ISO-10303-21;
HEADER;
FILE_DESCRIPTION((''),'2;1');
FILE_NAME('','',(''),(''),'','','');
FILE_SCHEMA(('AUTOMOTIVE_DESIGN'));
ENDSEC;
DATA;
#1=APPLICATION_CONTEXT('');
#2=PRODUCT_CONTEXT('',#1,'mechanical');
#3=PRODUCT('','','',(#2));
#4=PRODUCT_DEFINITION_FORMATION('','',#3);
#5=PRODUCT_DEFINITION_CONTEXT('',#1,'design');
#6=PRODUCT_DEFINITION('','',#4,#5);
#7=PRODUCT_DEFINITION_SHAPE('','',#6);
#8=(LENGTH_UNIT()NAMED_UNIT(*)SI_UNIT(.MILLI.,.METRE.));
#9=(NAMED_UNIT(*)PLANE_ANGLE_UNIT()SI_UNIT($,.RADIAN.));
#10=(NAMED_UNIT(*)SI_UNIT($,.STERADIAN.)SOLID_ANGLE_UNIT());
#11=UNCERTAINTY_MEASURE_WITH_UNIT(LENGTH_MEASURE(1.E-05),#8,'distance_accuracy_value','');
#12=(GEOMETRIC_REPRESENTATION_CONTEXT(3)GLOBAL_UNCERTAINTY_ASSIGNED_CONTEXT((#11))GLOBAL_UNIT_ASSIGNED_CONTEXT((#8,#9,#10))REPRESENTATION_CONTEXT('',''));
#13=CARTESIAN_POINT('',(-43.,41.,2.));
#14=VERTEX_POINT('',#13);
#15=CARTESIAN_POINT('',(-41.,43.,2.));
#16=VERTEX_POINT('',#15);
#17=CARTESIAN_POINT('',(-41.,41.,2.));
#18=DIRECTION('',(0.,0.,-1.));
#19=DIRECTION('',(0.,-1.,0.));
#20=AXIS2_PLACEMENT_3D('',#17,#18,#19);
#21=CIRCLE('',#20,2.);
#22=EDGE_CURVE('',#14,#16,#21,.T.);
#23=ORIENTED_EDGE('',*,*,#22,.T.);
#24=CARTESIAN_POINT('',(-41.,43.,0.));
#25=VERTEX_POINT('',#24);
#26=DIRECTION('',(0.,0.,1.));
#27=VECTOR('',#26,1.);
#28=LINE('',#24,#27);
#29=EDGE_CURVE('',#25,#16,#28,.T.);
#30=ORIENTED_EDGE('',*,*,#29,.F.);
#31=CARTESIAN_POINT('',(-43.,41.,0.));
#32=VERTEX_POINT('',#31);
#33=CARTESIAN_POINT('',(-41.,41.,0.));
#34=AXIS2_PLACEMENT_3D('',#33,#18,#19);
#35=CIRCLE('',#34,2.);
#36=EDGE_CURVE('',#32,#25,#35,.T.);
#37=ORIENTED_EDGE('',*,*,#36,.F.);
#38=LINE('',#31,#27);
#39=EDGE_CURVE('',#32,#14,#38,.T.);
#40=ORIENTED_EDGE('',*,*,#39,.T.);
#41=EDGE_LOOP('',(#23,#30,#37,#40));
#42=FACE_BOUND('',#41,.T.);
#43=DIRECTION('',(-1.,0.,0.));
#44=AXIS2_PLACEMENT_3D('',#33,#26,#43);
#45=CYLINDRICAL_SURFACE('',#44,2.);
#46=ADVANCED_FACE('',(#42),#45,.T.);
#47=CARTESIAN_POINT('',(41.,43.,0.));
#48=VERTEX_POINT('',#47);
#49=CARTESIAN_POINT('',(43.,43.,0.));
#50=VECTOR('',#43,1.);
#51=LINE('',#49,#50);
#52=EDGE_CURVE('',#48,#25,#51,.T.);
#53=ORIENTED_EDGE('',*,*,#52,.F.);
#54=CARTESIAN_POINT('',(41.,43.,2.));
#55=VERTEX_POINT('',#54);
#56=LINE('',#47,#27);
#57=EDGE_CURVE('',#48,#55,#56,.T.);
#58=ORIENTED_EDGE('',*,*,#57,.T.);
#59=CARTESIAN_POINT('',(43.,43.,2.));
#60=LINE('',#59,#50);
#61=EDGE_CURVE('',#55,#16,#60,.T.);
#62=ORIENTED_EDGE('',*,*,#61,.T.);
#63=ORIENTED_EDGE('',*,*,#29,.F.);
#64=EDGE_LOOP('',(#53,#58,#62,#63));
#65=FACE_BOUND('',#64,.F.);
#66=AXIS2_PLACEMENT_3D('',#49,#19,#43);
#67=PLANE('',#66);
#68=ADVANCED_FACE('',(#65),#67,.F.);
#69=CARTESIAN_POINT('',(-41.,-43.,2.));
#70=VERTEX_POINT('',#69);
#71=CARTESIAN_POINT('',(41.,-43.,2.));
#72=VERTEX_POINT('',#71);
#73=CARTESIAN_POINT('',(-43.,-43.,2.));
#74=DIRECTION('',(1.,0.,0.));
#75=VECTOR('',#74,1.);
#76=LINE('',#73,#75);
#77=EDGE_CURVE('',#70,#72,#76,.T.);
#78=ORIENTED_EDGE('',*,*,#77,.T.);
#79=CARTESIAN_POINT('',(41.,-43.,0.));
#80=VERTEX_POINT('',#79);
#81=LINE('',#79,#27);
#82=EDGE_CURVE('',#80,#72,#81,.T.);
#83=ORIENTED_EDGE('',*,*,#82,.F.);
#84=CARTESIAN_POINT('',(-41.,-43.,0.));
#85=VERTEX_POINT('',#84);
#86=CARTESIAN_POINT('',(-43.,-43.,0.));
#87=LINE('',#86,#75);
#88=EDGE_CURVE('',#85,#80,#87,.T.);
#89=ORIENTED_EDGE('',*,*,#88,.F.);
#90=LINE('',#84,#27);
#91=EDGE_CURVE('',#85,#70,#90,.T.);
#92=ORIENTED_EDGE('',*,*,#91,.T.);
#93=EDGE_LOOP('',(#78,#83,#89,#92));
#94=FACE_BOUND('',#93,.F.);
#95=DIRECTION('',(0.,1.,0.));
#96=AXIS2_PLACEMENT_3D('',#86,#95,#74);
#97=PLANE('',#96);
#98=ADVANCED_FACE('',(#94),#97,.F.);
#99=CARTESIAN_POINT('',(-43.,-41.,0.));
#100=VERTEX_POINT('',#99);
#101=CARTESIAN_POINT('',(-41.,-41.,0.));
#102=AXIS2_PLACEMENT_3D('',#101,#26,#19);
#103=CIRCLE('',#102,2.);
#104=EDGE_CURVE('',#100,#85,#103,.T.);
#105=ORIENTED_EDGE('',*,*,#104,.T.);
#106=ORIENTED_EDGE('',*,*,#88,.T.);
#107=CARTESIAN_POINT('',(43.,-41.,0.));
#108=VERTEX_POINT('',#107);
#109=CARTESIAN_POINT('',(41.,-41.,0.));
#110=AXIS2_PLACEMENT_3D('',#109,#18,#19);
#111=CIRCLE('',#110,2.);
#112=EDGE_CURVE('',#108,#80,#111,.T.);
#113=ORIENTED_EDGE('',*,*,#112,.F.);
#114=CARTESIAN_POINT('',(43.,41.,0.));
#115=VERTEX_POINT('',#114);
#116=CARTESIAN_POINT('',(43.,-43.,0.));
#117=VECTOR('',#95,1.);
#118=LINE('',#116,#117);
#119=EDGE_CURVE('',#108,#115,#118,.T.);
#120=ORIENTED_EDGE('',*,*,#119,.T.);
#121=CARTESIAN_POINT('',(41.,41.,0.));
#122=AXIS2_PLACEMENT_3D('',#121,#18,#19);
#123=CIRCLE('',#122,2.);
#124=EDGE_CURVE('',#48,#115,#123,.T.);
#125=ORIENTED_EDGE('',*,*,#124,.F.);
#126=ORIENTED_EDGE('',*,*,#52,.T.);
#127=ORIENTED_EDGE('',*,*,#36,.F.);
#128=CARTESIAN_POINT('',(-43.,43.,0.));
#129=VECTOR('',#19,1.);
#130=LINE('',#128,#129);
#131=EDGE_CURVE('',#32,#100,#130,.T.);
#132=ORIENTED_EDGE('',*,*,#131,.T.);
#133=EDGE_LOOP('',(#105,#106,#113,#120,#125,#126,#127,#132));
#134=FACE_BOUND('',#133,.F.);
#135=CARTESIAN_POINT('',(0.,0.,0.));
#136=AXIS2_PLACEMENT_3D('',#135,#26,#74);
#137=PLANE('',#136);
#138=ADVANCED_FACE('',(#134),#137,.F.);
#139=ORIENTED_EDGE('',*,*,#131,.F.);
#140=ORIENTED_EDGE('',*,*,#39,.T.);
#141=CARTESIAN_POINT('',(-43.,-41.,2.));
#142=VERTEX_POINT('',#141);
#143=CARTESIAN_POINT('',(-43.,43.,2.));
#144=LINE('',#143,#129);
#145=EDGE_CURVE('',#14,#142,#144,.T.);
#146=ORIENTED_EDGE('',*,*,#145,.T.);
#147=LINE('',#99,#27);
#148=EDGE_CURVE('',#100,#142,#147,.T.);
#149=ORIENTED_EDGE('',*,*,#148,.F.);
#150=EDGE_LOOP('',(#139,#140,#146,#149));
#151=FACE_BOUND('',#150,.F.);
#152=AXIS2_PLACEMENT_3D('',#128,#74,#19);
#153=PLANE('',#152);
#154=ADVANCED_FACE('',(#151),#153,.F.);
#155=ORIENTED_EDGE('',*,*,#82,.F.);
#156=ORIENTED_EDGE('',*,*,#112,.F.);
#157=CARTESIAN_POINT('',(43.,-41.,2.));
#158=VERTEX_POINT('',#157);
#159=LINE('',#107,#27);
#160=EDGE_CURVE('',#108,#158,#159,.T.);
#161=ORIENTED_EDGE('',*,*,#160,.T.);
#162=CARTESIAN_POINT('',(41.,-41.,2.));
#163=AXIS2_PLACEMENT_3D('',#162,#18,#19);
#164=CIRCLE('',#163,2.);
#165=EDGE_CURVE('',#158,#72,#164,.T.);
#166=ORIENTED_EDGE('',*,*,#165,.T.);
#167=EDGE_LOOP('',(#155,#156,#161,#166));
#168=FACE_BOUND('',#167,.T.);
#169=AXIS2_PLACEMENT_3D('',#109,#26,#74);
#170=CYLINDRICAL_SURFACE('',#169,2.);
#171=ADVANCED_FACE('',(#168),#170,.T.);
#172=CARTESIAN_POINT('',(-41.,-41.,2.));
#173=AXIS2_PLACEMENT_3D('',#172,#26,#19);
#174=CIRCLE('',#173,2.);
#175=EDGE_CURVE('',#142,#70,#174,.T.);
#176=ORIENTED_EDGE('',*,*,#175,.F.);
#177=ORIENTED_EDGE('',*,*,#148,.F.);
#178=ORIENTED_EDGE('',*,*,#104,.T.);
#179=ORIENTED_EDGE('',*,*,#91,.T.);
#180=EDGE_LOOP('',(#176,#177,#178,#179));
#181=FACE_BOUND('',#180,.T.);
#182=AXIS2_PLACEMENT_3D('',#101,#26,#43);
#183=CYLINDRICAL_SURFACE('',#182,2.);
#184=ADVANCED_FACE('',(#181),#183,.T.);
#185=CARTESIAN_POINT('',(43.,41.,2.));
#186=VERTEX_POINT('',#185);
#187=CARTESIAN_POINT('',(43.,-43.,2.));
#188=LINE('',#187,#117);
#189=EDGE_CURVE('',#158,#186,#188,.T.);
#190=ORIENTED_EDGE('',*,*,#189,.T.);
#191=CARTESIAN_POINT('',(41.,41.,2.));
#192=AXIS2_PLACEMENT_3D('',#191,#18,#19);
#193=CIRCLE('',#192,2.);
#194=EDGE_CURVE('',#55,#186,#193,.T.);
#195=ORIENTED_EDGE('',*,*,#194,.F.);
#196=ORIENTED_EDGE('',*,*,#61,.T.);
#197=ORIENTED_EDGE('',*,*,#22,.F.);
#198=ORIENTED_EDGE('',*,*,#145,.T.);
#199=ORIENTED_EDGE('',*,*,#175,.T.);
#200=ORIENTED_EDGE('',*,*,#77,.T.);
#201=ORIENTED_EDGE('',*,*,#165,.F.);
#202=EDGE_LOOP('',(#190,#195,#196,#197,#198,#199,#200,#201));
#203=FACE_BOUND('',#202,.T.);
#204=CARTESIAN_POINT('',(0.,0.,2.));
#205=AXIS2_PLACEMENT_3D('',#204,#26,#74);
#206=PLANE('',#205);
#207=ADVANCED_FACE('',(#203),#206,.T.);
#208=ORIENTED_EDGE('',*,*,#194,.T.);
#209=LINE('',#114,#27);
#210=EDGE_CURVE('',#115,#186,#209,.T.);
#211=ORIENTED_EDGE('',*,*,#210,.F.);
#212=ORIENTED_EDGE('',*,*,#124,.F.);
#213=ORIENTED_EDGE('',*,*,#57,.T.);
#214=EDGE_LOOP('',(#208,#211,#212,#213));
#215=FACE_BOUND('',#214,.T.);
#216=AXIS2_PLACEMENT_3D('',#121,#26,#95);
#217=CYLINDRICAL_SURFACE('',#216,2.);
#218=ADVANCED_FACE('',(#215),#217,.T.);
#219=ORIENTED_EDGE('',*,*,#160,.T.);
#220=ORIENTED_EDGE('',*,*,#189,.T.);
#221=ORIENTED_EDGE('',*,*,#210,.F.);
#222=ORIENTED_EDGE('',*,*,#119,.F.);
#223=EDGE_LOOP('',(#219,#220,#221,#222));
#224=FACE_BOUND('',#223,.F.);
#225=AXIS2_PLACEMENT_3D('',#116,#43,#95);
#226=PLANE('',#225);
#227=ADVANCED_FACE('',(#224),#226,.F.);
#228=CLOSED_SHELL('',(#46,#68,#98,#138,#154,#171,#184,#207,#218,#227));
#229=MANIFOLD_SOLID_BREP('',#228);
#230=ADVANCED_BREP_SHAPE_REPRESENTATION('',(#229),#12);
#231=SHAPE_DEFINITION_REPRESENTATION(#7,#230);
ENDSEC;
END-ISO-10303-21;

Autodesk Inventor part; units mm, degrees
ref_plane "YZ Plane" through (0, 0, 0) normal (1, 0, 0) x (0, 1, 0)
ref_plane "XZ Plane" through (0, 0, 0) normal (0, 1, 0) x (-1, 0, 0)
ref_plane "XY Plane" through (0, 0, 0) normal (0, 0, 1) x (1, 0, 0)
sketch "Sketch1" plane through (0, 0, 0) normal (0, 0, 1) x (1, 0, 0)
  line L0 (-43, -43) -> (43, -43)
  line L1 (43, -43) -> (43, 43)
  line L2 (43, 43) -> (-43, 43)
  line L3 (-43, 43) -> (-43, -43)
  line L4 (-43, -43) -> (43, 43) construction
  line L5 (43, -43) -> (-43, 43) construction
  point P0 (0, 0)
  dimension "d154" = 86
  dimension "d155" = 86
extrude "Plate5" add sketch "Sketch1" along normal blind 2
fillet "Corner Round1" radius 2 4 edges at (43, 43, 1) (-43, 43, 1) (-43, -43, 1) (43, -43, 1)
properties part number "PRS 1200-511 FDS 1000 CUP 1" material "Stainless Steel"
